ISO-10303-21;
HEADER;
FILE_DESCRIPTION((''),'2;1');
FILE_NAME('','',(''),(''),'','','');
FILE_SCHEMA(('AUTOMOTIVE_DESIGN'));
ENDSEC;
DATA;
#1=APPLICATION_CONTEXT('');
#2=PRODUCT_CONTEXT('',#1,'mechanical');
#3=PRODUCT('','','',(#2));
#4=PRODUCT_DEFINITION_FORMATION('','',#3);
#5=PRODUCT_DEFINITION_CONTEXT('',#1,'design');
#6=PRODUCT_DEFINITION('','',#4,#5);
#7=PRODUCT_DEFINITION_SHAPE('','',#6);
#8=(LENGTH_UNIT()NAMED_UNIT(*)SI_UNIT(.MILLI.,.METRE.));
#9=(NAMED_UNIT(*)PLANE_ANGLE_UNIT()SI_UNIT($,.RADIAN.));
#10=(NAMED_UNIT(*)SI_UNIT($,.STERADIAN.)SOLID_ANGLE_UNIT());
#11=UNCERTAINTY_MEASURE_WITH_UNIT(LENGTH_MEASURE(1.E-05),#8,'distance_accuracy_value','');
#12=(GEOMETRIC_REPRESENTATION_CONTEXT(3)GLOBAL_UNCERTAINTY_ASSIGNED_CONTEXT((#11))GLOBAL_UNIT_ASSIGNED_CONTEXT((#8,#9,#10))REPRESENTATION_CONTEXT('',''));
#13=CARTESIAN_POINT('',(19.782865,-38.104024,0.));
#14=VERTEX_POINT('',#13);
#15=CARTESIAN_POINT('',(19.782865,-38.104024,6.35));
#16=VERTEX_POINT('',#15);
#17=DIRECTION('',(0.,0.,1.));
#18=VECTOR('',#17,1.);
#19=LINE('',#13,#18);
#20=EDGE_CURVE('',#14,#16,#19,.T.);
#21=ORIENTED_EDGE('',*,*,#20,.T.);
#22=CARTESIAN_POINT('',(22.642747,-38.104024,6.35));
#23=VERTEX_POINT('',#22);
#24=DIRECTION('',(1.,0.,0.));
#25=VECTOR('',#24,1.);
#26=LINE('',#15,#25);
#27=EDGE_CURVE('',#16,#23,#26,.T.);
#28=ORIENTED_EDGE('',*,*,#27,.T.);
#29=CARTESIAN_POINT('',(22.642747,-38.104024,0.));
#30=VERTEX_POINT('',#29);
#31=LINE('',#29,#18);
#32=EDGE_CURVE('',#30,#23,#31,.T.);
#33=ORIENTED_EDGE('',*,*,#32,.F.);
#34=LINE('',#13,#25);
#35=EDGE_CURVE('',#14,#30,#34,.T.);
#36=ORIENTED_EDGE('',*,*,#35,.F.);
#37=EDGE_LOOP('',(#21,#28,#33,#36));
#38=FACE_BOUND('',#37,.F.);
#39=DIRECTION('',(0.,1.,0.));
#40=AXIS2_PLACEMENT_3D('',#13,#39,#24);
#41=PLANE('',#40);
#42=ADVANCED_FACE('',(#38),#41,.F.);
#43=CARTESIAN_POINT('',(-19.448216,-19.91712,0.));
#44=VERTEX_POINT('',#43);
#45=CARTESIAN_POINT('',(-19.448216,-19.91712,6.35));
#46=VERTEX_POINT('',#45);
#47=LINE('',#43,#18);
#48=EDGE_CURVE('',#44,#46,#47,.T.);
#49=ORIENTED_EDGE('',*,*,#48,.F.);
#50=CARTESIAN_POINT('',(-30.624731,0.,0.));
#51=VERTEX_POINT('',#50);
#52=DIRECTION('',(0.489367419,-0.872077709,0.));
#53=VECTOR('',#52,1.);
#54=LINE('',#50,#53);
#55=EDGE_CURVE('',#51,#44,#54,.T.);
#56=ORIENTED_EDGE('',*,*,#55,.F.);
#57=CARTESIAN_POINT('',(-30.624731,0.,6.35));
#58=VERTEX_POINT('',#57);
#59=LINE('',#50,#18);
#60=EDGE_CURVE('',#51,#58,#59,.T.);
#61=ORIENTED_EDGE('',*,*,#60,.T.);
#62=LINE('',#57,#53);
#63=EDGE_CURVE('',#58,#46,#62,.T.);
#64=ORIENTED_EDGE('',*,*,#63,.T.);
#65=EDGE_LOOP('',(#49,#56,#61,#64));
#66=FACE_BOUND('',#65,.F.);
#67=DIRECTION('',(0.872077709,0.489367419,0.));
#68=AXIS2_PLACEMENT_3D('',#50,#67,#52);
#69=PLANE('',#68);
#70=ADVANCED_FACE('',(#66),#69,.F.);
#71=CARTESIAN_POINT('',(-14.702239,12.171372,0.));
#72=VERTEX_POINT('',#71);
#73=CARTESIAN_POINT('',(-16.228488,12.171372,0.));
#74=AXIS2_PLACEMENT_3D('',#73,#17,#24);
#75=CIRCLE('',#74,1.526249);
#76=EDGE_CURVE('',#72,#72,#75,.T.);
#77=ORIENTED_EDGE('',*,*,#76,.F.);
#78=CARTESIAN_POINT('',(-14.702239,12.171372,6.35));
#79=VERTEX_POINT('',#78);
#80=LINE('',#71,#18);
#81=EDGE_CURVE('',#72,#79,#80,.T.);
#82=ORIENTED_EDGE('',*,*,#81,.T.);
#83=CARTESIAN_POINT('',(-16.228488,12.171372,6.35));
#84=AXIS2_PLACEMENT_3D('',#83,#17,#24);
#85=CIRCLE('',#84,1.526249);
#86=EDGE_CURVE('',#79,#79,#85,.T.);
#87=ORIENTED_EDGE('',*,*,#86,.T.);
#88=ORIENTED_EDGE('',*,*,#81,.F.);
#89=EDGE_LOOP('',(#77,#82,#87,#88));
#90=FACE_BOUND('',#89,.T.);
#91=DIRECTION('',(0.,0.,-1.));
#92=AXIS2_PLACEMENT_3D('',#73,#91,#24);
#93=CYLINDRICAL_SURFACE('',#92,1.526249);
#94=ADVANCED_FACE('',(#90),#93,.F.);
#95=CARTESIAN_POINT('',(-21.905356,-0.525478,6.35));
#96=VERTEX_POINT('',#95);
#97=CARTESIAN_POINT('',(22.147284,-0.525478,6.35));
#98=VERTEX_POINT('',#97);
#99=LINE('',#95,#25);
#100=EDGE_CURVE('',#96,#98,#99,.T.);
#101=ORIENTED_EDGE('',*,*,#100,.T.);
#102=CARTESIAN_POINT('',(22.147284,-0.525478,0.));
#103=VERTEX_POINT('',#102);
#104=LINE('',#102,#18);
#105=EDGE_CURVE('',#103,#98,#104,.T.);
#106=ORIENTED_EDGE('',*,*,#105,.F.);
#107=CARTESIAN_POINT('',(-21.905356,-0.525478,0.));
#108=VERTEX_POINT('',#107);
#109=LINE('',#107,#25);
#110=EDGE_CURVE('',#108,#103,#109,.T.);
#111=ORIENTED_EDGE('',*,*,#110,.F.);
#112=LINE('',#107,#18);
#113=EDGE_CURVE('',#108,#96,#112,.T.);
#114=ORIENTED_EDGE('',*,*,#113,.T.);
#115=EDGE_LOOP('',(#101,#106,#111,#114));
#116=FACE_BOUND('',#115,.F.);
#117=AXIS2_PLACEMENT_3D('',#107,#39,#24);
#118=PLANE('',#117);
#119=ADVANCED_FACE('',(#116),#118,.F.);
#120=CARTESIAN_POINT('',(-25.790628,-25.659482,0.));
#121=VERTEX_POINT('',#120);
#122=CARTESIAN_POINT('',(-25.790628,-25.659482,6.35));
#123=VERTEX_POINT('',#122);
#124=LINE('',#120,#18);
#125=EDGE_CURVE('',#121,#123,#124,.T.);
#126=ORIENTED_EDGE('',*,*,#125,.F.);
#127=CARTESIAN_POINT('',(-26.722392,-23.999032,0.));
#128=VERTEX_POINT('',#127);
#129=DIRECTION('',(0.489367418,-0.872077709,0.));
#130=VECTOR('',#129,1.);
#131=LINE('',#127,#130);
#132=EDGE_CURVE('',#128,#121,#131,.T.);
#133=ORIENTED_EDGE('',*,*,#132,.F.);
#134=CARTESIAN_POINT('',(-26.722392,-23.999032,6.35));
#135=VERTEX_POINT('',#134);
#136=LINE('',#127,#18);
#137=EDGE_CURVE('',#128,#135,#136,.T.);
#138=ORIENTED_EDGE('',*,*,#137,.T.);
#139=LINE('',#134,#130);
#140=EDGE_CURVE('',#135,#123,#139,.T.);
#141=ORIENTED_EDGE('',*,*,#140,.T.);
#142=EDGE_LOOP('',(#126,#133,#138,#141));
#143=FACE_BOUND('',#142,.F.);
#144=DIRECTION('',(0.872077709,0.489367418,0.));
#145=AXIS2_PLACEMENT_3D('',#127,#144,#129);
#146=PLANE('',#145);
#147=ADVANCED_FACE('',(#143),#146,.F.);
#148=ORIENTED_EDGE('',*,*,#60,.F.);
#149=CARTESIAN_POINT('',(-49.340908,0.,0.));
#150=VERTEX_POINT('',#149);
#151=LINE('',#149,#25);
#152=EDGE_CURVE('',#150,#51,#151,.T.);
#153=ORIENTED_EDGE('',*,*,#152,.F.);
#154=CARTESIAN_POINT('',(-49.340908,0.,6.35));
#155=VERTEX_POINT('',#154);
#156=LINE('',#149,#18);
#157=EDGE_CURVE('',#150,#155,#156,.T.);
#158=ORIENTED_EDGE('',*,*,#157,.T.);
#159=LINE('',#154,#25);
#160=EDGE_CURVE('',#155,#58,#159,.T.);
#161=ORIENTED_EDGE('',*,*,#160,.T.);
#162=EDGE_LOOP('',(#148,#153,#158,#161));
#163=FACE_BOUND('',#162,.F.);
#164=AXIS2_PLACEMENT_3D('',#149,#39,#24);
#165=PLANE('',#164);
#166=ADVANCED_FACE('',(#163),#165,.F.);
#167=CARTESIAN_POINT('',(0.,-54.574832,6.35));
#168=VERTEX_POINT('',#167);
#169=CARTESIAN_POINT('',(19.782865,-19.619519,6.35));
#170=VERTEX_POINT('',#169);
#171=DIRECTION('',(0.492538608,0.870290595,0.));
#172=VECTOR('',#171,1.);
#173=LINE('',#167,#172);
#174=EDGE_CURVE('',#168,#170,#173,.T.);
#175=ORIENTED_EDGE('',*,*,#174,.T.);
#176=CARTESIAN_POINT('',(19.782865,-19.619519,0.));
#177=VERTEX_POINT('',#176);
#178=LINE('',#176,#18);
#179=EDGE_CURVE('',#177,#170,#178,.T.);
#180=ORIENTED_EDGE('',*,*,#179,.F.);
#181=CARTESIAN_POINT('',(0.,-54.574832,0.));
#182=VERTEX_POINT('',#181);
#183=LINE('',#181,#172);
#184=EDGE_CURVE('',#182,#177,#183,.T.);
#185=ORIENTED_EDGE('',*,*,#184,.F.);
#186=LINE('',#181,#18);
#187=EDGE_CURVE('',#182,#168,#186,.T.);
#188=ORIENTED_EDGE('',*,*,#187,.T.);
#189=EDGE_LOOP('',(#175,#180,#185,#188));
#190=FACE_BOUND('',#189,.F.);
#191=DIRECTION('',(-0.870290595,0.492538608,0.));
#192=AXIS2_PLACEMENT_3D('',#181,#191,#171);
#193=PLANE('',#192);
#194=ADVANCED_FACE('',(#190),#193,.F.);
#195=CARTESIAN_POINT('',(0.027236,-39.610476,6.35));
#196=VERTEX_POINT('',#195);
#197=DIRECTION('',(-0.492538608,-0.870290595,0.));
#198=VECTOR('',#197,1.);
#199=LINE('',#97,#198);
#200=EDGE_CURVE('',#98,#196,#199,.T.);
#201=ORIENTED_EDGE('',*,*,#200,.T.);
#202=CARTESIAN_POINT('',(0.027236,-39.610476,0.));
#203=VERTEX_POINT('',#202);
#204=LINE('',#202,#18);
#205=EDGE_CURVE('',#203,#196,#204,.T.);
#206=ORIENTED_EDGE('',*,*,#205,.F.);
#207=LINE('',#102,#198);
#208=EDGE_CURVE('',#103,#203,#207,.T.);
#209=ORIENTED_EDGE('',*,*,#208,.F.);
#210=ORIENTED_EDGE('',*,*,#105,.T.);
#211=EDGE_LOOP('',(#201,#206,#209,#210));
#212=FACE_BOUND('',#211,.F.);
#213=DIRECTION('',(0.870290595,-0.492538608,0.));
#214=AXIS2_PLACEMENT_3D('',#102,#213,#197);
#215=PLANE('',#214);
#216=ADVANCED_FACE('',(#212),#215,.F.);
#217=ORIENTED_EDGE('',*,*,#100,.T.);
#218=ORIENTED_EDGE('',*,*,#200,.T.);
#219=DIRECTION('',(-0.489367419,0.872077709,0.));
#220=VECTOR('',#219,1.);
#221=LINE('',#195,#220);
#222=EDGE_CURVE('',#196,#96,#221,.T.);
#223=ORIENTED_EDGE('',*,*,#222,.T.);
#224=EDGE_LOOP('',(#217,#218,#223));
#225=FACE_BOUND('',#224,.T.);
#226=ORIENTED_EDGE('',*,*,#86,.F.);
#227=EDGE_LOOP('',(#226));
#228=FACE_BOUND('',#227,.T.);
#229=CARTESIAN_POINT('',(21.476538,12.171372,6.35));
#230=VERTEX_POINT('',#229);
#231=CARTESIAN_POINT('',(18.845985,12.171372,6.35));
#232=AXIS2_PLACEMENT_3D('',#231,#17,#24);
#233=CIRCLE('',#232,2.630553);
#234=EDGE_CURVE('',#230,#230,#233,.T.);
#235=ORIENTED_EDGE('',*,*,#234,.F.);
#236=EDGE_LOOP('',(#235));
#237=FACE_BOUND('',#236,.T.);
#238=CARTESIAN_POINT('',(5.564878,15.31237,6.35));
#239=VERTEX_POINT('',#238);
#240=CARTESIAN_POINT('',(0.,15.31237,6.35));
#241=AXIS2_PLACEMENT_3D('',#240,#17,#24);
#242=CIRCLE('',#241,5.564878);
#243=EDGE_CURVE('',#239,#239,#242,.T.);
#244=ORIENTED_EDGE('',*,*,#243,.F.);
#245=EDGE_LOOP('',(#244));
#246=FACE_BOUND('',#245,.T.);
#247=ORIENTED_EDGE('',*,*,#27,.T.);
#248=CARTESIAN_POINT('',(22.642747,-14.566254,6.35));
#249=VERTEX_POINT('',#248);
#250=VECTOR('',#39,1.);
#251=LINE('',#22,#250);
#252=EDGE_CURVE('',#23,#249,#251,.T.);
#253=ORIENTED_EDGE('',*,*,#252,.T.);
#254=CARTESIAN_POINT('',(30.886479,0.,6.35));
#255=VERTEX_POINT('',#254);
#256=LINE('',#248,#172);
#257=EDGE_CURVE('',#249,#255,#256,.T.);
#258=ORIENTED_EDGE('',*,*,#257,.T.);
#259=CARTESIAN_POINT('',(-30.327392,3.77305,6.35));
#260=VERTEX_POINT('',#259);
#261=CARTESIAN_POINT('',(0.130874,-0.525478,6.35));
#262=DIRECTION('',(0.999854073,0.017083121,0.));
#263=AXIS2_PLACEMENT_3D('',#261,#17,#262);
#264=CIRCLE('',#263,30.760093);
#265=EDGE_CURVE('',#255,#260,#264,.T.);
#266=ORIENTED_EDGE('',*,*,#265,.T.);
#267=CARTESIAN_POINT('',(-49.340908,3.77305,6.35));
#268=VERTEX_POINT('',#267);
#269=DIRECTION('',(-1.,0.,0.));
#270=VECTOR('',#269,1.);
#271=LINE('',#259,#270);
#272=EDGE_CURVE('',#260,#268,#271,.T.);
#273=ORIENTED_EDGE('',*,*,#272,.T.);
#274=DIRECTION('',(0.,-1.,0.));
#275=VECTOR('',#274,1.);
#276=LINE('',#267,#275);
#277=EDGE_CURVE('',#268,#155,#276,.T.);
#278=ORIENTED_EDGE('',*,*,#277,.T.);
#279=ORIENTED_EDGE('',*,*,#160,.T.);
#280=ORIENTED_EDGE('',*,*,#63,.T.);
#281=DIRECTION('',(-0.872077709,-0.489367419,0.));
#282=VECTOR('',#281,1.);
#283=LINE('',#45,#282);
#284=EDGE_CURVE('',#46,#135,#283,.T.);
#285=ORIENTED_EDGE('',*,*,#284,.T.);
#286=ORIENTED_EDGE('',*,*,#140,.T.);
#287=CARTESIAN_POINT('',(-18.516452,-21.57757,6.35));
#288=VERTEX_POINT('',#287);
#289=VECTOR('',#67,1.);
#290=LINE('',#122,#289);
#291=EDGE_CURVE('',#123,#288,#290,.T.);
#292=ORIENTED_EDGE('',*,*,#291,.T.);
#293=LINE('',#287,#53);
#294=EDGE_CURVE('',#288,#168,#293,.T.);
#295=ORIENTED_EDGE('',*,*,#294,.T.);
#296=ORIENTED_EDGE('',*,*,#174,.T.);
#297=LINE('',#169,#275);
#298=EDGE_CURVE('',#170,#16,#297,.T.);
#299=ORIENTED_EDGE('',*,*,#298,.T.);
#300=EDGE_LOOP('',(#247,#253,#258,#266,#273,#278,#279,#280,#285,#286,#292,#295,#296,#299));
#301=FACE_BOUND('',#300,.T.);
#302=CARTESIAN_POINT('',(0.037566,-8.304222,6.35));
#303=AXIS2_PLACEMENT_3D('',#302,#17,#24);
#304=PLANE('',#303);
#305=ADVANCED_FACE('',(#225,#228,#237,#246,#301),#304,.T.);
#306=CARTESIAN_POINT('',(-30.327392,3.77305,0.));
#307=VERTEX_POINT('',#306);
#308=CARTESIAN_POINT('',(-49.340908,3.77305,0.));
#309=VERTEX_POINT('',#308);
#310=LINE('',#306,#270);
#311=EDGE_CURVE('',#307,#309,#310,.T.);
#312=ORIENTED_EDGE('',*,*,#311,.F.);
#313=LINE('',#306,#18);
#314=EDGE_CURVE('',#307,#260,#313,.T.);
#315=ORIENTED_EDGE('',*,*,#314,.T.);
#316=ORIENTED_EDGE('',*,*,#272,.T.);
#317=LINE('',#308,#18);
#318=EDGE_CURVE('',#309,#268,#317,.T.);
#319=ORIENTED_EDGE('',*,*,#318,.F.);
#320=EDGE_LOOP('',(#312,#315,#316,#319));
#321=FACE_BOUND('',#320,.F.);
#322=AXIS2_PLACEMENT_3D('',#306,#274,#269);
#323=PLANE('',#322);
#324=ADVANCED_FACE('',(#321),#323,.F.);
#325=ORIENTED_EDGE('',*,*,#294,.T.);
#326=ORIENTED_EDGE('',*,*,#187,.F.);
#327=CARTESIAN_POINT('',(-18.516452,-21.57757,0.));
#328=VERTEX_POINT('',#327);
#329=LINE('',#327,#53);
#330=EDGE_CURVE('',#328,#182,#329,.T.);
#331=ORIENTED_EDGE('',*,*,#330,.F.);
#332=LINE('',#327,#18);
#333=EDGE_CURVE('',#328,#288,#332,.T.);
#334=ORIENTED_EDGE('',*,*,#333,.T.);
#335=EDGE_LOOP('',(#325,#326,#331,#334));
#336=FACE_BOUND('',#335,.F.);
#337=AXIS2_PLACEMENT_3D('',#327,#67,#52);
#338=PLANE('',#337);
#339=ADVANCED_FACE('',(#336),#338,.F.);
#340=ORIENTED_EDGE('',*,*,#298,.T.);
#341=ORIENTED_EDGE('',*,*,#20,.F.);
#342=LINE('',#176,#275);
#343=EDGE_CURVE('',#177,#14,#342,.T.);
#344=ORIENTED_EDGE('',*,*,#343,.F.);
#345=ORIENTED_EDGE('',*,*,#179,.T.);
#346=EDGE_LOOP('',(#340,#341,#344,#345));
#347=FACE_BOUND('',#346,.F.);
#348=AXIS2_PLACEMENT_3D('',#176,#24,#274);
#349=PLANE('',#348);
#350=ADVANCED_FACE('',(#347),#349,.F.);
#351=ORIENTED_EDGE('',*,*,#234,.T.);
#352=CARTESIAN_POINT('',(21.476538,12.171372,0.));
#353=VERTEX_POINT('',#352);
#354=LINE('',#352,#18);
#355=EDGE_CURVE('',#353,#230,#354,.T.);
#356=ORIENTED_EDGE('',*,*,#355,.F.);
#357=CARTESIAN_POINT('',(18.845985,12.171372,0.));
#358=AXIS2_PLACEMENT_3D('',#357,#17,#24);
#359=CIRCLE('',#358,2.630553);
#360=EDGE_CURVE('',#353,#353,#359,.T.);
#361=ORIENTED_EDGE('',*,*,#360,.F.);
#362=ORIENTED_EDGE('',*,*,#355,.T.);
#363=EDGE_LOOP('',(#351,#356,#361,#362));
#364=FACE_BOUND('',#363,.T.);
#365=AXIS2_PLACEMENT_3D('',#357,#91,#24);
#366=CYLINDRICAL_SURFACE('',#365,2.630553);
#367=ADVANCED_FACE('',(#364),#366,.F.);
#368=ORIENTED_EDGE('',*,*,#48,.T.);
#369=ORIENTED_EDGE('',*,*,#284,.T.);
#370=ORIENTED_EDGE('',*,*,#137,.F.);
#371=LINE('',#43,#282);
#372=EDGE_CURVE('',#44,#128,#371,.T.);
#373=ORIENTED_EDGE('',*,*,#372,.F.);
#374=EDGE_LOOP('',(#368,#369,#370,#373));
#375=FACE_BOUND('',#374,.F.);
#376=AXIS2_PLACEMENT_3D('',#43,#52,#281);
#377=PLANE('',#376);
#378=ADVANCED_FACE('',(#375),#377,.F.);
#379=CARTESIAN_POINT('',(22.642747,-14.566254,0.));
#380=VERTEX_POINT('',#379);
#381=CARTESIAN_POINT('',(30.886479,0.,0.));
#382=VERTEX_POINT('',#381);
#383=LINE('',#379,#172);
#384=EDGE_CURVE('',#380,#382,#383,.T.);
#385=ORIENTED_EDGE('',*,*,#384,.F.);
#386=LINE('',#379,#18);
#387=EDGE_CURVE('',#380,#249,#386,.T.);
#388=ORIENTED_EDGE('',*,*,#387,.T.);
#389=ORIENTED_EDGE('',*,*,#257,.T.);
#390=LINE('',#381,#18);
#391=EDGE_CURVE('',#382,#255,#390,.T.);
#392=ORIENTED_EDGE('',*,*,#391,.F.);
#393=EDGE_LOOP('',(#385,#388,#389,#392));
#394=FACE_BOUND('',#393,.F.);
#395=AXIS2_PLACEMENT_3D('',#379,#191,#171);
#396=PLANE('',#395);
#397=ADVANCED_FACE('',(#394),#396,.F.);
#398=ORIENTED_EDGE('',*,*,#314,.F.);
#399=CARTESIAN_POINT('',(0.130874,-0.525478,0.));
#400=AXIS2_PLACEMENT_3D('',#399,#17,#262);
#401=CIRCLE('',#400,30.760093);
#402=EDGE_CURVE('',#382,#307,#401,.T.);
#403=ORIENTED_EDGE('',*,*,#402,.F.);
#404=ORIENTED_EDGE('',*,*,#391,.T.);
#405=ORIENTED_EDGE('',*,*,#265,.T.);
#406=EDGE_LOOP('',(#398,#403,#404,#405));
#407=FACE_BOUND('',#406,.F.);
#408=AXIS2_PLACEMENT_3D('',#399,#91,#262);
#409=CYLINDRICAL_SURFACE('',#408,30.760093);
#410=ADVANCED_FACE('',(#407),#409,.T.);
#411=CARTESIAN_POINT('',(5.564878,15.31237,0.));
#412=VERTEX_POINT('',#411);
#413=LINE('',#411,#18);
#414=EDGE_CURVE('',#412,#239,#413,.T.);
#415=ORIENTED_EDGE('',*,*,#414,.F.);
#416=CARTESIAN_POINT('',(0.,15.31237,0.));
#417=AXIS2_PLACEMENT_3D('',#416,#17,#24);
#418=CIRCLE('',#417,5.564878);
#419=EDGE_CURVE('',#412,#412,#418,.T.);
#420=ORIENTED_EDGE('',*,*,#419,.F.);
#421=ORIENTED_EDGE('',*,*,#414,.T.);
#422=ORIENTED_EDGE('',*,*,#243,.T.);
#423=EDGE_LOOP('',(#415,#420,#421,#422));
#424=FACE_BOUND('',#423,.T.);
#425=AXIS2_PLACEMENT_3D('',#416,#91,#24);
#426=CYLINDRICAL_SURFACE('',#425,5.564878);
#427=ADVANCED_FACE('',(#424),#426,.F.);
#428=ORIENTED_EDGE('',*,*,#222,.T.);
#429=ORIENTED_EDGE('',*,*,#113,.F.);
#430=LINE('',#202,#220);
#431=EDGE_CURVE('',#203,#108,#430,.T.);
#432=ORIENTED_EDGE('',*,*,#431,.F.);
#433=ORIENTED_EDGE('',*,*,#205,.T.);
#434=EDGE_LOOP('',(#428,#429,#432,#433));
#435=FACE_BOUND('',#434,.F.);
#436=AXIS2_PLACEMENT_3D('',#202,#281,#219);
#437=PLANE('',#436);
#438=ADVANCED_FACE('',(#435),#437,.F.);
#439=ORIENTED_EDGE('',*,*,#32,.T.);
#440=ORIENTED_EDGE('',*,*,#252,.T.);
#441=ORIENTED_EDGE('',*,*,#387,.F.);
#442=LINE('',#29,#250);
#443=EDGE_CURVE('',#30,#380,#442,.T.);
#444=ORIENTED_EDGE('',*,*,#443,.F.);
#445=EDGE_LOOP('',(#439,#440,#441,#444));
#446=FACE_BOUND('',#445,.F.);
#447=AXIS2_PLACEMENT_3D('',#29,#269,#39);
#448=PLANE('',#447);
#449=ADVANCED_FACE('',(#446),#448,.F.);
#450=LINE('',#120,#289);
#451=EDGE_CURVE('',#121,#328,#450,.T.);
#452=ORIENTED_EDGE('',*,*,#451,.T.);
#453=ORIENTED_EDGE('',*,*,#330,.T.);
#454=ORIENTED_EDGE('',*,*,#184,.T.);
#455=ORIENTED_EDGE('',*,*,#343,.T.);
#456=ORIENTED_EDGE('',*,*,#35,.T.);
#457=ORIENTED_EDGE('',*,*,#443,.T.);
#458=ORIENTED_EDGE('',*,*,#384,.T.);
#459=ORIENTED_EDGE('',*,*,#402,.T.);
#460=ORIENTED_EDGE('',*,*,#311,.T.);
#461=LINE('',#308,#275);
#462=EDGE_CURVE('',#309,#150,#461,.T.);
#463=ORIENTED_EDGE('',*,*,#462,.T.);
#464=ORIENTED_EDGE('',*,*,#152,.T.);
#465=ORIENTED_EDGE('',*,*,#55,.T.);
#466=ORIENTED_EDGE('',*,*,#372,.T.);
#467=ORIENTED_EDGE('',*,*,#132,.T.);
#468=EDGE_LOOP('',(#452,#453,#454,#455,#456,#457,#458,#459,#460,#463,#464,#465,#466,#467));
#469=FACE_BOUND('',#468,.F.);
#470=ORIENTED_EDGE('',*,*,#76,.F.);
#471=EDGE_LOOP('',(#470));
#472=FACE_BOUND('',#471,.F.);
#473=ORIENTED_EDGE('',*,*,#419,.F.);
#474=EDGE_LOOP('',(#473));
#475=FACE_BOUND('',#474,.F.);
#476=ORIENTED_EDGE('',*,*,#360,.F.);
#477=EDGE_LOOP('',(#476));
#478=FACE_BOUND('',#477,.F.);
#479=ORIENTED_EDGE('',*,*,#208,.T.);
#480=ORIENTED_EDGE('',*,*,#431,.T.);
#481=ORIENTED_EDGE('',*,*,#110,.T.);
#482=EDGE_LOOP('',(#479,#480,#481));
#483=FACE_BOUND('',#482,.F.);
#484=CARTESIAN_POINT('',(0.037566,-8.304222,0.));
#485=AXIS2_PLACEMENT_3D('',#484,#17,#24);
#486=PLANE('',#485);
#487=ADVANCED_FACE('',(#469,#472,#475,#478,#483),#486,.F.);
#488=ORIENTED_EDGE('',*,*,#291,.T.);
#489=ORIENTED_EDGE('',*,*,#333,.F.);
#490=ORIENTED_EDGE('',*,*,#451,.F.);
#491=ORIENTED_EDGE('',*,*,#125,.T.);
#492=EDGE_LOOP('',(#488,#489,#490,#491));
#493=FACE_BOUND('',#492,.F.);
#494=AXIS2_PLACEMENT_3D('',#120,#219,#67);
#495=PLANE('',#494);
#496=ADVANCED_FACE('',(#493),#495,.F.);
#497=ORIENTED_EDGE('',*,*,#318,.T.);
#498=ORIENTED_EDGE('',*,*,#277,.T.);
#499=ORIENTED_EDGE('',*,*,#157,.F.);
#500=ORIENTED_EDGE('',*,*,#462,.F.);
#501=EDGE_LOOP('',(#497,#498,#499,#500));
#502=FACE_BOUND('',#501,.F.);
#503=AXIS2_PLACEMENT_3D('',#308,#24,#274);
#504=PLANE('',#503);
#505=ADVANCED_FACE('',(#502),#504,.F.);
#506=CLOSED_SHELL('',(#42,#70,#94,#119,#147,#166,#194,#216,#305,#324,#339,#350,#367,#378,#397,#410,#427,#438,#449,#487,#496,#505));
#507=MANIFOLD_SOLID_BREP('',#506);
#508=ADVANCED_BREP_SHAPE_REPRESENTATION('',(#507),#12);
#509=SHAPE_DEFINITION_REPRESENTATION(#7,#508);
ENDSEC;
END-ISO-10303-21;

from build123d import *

# Parameters (mm, degrees)
F0_R     = 1.5262492047
F0_R_2   = 5.564877875
F0_R_3   = 2.6305534458
F1_DEPTH = 6.35


# Not quite as in the source:
# - a feature names something its author has since deleted; it is built from what else it names


with BuildPart() as f1:
    # F0 (on Top) → F1 (new body)
    with BuildSketch(Plane.XY):
        with BuildLine():
            Line((-18.5164521814, -21.5775697793), (0, -54.5748323202))
            Line((0, -54.5748323202), (19.7828651091, -19.6195188363))
            Line((19.7828651091, -19.6195188363), (22.6427465677, -14.5662541873))
            Line((22.6427465677, -14.5662541873), (30.8864787221, 0))
            ThreePointArc((30.8864787221, 0), (2.0232479541, 30.1763499671), (-30.3273923907, 3.7730498517))
            ThreePointArc((-30.3273923907, 3.7730498517), (-30.5341463656, 1.8911023526), (-30.6247305125, 0))
            Line((-30.6247305125, 0), (-19.4482157174, -19.9171196174))
            Line((-19.4482157174, -19.9171196174), (-18.5164521814, -21.5775697793))
        make_face()
        Polygon((22.1472843044, -0.5254783843), (0.0272358089, -39.6104756875), (-21.9053558016, -0.5254783843), (0.1308741048, -0.5254783843), align=None, mode=Mode.SUBTRACT)
        with Locations((-16.2284877151, 12.1713718399)):
            Circle(F0_R, mode=Mode.SUBTRACT)
        with Locations((0, 15.3123699129)):
            Circle(F0_R_2, mode=Mode.SUBTRACT)
        with Locations((18.8459847122, 12.1713718399)):
            Circle(F0_R_3, mode=Mode.SUBTRACT)
        Polygon((22.6427465677, -14.5662541873), (19.7828651091, -19.6195188363), (19.7828651091, -38.1040237844), (22.6427465677, -38.1040237844), align=None)
        Polygon((-25.7906284703, -25.6594822484), (-18.5164521814, -21.5775697793), (-19.4482157174, -19.9171196174), (-26.7223920062, -23.9990320865), align=None)
        with BuildLine():
            Line((-49.3409076612, 0), (-30.6247305125, 0))
            ThreePointArc((-30.6247305125, 0), (-30.5341463656, 1.8911023526), (-30.3273923907, 3.7730498517))
            Line((-30.3273923907, 3.7730498517), (-49.3409076612, 3.7730498517))
            Line((-49.3409076612, 3.7730498517), (-49.3409076612, 0))
        make_face()
    extrude(amount=F1_DEPTH)


solid = f1.part
